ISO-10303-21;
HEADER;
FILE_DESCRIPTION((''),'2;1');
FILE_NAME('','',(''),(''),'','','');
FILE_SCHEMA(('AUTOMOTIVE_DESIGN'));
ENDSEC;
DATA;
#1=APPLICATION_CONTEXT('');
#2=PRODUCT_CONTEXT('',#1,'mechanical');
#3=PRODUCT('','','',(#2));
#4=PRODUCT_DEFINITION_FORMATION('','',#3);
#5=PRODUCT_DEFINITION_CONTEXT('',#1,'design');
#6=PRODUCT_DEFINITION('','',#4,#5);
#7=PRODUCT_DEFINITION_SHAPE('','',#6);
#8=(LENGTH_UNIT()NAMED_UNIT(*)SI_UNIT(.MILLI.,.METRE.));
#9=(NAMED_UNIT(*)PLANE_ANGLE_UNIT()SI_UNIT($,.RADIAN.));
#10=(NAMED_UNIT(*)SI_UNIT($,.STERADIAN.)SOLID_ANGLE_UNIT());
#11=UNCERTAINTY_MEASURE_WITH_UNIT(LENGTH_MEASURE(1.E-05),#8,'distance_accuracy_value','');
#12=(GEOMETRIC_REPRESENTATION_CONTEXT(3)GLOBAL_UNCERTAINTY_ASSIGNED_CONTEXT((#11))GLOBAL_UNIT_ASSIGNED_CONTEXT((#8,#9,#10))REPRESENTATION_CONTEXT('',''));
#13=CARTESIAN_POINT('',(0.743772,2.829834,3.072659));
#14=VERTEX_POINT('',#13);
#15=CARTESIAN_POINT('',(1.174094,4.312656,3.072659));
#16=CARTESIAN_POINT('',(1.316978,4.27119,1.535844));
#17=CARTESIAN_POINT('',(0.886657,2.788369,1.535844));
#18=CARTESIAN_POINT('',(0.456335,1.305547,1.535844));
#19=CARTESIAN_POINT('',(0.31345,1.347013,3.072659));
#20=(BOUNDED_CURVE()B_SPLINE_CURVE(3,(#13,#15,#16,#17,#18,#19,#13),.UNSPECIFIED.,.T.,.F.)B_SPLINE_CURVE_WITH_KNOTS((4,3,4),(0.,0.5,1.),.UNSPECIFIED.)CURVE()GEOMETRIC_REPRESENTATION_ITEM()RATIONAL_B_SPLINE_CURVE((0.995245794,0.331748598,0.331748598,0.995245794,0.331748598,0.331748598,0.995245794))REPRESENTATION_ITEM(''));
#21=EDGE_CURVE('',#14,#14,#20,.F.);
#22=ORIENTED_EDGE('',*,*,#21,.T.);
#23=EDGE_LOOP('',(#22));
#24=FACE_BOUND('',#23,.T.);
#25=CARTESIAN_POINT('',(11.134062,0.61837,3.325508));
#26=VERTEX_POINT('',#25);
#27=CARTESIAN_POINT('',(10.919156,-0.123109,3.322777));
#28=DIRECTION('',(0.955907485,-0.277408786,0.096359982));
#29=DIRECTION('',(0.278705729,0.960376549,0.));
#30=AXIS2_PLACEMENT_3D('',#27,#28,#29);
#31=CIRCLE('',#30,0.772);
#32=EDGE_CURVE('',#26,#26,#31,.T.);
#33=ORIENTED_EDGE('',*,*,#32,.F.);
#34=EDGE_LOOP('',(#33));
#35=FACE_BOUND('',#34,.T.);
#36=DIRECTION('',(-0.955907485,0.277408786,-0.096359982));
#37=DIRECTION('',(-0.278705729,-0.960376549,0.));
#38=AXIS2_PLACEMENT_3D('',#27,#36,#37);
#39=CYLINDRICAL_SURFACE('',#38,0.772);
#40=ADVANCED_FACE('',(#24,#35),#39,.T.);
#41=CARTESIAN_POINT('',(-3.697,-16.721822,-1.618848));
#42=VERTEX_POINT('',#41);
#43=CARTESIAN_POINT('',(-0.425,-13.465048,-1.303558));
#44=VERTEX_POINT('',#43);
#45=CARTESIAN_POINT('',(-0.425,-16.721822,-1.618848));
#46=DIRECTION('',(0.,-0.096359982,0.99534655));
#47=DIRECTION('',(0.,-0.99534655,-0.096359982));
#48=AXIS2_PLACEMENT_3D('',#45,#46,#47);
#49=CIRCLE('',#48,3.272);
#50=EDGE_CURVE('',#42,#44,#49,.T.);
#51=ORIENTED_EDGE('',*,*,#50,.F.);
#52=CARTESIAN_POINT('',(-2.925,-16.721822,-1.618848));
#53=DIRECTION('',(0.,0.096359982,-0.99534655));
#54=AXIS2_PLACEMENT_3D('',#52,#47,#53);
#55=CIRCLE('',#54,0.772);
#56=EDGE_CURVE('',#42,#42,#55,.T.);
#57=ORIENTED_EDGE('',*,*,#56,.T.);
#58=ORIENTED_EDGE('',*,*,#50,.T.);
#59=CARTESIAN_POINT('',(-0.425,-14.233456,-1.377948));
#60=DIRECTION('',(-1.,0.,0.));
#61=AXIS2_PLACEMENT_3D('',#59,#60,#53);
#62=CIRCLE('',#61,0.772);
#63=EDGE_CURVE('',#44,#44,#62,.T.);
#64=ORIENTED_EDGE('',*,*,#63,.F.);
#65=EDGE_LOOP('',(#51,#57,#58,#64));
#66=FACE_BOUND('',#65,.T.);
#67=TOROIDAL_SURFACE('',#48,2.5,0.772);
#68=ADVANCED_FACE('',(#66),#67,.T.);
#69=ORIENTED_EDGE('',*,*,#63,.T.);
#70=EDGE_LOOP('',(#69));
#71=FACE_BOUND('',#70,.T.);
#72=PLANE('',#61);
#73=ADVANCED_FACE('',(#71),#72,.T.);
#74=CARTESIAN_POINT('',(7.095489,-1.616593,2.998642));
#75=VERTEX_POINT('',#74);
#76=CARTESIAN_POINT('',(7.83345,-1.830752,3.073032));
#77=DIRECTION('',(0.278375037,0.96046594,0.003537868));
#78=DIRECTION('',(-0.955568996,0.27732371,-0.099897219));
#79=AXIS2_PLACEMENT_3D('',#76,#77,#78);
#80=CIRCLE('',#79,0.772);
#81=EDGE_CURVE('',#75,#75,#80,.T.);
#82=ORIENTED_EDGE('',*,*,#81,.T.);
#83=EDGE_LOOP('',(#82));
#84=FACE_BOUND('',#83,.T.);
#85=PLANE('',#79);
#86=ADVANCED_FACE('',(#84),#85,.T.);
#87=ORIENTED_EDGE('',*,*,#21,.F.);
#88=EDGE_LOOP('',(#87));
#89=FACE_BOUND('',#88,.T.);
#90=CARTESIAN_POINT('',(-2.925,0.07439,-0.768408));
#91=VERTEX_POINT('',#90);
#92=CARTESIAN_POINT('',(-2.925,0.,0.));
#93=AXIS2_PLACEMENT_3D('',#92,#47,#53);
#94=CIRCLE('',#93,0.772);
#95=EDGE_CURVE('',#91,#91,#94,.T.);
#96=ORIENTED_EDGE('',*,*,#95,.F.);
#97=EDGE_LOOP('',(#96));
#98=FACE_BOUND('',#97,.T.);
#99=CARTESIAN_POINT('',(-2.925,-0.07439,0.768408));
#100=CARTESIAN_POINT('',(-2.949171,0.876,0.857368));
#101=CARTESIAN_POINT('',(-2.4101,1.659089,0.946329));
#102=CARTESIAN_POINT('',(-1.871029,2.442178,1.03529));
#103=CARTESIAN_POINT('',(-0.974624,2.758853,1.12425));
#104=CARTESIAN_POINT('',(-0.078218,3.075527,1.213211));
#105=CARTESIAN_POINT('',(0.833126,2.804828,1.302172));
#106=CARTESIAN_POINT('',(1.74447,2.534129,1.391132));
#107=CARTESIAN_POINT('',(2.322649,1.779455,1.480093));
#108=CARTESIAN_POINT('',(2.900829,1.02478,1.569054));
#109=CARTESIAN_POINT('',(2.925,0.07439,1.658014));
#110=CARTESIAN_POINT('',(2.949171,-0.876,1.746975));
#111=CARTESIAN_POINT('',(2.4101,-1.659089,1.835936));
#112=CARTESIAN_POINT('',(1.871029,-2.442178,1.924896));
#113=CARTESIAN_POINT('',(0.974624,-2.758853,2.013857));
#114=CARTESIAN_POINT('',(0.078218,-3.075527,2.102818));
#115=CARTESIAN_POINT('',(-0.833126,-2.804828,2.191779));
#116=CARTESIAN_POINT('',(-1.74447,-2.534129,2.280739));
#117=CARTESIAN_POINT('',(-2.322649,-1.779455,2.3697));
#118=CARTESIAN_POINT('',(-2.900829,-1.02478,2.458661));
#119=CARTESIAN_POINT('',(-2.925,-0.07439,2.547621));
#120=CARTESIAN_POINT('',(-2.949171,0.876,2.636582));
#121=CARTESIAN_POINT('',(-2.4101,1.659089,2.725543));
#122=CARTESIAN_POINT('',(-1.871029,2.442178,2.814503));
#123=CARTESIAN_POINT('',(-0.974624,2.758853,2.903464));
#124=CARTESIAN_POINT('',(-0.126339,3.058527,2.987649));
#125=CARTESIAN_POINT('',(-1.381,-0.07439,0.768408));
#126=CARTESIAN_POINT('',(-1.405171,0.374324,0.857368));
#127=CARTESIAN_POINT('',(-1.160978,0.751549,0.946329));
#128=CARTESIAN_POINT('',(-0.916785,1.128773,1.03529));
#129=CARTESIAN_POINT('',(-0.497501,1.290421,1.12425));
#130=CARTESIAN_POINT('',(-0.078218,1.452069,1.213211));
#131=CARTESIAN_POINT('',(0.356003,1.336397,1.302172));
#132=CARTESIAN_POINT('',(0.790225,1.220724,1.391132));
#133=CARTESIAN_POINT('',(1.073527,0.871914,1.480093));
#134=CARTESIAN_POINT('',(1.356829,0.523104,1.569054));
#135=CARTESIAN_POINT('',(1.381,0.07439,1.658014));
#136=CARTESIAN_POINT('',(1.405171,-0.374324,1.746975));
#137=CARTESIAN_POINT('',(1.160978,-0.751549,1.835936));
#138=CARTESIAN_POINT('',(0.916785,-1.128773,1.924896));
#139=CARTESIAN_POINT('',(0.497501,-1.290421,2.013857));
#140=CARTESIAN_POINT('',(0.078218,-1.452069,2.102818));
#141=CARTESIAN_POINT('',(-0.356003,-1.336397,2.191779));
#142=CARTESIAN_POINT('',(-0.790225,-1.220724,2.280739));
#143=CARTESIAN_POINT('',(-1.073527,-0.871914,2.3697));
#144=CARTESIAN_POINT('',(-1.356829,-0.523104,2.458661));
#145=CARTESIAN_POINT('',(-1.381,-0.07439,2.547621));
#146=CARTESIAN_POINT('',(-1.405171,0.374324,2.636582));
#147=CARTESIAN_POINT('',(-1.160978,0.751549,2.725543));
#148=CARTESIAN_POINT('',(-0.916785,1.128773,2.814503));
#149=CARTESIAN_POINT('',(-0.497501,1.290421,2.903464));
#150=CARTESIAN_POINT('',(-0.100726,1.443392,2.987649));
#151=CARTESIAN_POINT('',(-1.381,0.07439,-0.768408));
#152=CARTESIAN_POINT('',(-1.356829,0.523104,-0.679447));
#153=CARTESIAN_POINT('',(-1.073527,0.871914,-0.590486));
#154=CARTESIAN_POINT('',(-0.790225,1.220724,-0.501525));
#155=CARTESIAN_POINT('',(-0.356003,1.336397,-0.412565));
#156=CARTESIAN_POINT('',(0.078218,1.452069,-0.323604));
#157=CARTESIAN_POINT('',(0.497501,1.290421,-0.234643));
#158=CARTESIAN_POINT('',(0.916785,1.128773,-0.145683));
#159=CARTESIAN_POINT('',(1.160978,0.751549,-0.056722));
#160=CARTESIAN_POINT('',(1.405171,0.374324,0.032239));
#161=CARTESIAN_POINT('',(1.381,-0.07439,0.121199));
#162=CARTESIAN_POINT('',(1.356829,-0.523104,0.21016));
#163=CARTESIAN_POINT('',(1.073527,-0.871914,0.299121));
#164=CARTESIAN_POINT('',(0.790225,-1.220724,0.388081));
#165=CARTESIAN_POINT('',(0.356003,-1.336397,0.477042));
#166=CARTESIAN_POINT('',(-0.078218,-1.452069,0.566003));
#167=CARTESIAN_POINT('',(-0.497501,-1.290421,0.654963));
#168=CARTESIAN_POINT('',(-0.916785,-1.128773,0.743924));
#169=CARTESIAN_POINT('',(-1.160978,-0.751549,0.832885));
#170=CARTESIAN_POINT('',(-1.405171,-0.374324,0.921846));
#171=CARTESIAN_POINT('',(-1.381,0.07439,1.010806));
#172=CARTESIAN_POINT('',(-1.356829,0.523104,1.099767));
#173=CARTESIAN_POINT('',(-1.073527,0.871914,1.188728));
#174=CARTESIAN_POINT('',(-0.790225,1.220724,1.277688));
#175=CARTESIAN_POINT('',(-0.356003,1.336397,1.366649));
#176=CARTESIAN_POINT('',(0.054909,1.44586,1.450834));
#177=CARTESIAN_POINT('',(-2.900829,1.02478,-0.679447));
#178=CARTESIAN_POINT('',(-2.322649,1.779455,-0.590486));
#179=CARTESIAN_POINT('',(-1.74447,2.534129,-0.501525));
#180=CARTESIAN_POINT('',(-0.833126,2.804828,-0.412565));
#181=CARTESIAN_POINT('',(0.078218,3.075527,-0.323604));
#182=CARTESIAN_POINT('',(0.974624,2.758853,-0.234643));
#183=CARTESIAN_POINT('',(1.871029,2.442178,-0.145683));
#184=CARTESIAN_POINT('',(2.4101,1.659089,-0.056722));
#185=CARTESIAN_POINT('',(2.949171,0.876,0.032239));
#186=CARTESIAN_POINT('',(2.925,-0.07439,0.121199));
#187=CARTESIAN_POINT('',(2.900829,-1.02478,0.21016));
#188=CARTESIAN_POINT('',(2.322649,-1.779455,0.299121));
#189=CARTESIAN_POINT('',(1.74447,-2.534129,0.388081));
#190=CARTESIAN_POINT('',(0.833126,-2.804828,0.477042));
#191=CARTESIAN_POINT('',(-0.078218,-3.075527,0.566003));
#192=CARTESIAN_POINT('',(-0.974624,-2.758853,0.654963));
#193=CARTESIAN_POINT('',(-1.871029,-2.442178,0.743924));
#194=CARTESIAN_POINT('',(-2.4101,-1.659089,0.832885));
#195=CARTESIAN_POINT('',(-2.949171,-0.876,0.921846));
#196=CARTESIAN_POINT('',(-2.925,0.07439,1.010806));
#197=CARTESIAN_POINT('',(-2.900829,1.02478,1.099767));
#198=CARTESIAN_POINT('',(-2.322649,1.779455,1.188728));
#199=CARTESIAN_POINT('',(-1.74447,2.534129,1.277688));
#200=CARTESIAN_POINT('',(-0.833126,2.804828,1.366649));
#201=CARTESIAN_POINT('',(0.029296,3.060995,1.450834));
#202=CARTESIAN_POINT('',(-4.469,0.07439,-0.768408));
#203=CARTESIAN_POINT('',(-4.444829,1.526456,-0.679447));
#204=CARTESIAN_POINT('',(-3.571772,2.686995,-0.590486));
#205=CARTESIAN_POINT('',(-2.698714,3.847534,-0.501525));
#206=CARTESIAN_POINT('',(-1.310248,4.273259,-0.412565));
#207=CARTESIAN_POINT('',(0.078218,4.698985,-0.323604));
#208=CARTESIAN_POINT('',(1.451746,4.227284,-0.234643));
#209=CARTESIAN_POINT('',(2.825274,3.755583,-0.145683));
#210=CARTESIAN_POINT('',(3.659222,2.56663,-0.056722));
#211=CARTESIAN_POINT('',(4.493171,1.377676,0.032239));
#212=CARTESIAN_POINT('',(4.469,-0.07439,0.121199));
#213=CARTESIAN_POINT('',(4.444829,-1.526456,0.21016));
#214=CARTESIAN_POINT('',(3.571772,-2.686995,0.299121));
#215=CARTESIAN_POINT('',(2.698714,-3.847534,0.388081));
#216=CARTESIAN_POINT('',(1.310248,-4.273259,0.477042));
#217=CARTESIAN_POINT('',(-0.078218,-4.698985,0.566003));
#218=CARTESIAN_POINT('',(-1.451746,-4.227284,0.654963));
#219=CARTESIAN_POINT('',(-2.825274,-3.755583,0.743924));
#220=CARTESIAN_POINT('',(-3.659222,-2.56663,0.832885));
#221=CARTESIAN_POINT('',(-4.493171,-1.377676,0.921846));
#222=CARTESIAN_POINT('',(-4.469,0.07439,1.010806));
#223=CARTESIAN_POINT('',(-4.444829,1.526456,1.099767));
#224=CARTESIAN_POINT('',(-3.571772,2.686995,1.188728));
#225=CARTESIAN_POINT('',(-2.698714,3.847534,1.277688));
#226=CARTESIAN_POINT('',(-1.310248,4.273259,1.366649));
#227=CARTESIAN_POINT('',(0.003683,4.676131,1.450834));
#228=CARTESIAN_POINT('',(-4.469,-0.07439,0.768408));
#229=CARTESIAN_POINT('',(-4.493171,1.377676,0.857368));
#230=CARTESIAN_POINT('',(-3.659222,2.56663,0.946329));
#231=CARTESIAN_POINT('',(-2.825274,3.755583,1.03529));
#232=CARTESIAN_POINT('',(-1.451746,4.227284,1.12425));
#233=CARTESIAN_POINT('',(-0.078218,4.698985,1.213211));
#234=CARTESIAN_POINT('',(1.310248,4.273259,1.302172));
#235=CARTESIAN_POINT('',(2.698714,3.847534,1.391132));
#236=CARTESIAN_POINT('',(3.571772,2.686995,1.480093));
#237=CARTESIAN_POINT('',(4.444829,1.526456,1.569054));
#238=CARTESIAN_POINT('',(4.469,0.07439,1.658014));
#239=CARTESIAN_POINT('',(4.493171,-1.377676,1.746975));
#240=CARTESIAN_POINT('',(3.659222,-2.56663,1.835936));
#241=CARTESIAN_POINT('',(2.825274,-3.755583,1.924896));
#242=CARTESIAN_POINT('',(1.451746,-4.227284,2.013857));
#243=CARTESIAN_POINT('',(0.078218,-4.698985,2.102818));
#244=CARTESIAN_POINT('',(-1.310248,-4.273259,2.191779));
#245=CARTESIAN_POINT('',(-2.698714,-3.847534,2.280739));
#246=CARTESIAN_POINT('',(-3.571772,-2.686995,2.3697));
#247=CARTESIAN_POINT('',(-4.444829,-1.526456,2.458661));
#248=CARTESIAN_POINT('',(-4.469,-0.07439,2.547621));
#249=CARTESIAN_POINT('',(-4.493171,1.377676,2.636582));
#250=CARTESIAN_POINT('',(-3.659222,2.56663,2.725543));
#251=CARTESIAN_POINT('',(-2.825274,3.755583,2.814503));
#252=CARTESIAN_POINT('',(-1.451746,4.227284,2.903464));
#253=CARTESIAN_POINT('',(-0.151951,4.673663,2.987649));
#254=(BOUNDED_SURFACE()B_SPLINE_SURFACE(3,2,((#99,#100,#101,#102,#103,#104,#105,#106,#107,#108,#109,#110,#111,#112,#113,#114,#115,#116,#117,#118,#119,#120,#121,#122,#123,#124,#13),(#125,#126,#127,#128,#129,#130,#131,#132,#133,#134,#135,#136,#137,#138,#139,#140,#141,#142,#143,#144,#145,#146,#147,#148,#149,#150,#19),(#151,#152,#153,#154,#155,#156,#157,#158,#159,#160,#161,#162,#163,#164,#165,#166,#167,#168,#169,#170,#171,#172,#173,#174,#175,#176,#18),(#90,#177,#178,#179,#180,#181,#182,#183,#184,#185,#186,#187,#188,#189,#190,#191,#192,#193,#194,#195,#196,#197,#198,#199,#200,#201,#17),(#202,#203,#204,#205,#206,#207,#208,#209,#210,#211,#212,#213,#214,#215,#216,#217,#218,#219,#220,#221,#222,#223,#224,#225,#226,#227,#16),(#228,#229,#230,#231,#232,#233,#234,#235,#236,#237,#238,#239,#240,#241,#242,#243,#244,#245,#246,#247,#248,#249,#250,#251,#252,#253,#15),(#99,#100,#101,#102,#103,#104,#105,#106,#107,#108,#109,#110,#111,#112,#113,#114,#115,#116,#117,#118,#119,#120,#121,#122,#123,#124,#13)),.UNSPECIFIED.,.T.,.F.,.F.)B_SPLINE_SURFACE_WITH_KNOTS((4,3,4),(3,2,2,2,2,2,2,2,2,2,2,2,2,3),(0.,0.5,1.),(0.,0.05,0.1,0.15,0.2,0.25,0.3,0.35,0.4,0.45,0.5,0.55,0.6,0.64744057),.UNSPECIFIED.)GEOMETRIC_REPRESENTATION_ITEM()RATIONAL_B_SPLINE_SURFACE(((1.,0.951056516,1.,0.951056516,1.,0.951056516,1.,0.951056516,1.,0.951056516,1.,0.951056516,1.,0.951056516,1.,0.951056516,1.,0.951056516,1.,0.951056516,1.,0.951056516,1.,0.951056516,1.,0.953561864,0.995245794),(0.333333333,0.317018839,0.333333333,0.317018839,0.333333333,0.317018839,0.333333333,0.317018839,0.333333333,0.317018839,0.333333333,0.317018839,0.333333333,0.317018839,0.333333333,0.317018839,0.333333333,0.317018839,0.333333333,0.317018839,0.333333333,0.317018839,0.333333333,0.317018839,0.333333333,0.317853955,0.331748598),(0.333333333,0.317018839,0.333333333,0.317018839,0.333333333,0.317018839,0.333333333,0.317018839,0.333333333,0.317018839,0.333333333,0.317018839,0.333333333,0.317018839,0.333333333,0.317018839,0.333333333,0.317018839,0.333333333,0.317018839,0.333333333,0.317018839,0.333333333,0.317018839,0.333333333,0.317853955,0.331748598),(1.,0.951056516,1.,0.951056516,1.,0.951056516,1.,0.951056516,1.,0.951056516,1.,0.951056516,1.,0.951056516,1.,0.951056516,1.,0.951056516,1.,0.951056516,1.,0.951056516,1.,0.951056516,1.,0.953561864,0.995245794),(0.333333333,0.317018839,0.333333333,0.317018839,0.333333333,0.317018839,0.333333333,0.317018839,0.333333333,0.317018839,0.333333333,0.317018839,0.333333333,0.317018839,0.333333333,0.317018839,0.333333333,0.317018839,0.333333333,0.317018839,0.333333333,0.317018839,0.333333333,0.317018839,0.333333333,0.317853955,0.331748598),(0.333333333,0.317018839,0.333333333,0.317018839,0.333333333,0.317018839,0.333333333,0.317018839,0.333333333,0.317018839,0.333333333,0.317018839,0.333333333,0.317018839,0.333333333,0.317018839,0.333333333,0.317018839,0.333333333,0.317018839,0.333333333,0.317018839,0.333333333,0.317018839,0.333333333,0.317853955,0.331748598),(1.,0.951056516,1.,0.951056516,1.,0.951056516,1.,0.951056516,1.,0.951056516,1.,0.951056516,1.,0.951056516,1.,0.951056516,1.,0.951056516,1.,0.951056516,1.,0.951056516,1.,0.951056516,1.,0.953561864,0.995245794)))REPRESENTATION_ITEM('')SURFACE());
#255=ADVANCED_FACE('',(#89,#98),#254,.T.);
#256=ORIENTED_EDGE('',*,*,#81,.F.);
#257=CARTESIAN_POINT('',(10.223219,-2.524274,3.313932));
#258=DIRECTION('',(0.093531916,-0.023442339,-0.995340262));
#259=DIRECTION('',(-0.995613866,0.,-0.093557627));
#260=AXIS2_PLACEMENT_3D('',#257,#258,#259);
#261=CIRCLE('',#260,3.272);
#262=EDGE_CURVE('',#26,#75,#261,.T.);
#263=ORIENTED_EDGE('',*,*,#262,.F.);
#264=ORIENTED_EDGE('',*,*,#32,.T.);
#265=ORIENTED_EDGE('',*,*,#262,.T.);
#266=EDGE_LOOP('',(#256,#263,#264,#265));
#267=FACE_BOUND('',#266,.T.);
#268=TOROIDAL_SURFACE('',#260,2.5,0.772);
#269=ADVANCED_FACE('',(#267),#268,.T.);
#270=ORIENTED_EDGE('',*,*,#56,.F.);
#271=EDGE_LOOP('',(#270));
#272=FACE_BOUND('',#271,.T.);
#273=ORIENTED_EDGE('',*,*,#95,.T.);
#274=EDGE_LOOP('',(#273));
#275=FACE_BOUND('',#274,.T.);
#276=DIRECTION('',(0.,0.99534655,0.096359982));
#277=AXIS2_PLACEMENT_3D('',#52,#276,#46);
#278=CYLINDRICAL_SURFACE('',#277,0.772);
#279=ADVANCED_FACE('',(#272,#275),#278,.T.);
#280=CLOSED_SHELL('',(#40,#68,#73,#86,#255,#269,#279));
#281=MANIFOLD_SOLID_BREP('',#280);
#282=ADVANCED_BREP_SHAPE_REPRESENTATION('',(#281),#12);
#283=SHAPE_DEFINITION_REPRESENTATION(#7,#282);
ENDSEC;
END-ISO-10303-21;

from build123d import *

# Parameters (mm, degrees)
SWEEP1_PITCH        = 1.779213779
SWEEP1_HEIGHT       = 2.304
SWEEP1_RADIUS       = 2.925
SWEEP1_START_ANGLE  = -180
SWEEP1_PROFILE_R    = 0.772
SKETCH7_R           = 0.772
BOSS_EXTRUDE1_DEPTH = 16.8
SKETCH8_R           = 0.772
BOSS_EXTRUDE2_DEPTH = 10.57
SKETCH11_R          = 0.772
SKETCH13_R          = 0.772


with BuildPart() as part:
    # Sweep1: sweep along a helix
    with BuildLine() as sweep1_path:
        add(Helix(SWEEP1_PITCH, SWEEP1_HEIGHT, SWEEP1_RADIUS, center=(0, 0, 0), direction=(0, 0, 1), lefthand=True, mode=Mode.PRIVATE).rotate(Axis((0, 0, 0), (0, 0, 1)), SWEEP1_START_ANGLE))
    # Sweep1 profile (on start of the path) → Sweep1 (sweep)
    with BuildSketch(Plane(origin=(-2.925, 0, 0), x_dir=(0, -0.09635998191573415, 0.9953465496424848), z_dir=(3.597284925943457e-13, 0.9953465496424848, 0.09635998191573415))):
        Circle(SWEEP1_PROFILE_R)
    sweep(path=sweep1_path.line, is_frenet=True)

    # Sketch7 → Boss-Extrude1 (add)
    with BuildSketch(Plane(origin=(0, 0, 0), x_dir=(1, 0, 0), z_dir=(7.675357685849381e-15, -0.9953465496424846, -0.09635998191573725))):
        with Locations(Location((-2.925, 0, 0), (0, 0, 90))):
            Circle(SKETCH7_R)
    extrude(amount=BOSS_EXTRUDE1_DEPTH)


with BuildPart() as boss_extrude2_tool:
    # Sketch8 → Boss-Extrude2 (new body)
    with BuildSketch(Plane(origin=(0.212247465, -0.061595199, 0.021395545), x_dir=(0.09353191621905146, -0.023442339284879547, -0.9953402621100208), z_dir=(0.9559074848197946, -0.27740878564078186, 0.09635998191573734))):
        with Locations(Location((-2.283117967, 2.933133661, 0), (0, 0, 179.796346996))):
            Circle(SKETCH8_R)
    extrude(amount=BOSS_EXTRUDE2_DEPTH)


with BuildPart() as part_1:
    add(part.part)


with BuildPart() as part_2:
    # Boss-Extrude2: joined with boss_extrude2_tool
    add(part_1.part.fuse(boss_extrude2_tool.part, tol=0.00001))

    # Sweep2: sweep along a path in Sketch10
    with BuildLine(Plane(origin=(0, 0, 0), x_dir=(1, 0, 0), z_dir=(-1.1470381111266431e-14, -0.09635998191573725, 0.9953465496424845))) as sweep2_path:
        ThreePointArc((-2.925, -16.8), (1.342766953, -18.567766953), (-0.425, -14.3))
    # Sketch11 → Sweep2 (sweep)
    with BuildSketch(Plane(origin=(0, -16.721822034, -1.618847696), x_dir=(1, 0, 0), z_dir=(7.675357685849381e-15, -0.9953465496424845, -0.09635998191573723))):
        with Locations((-2.925, 0)):
            Circle(SKETCH11_R)
    sweep(path=sweep2_path.line)

    # Sweep3: sweep along a path in Sketch12
    with BuildLine(Plane(origin=(-0.213544398, 0.053521626, 2.272479236), x_dir=(-0.9956162536810559, -0.0019645261204809467, -0.09351158240143997), z_dir=(0.09353191621905146, -0.023442339284879526, -0.9953402621100208))) as sweep3_path:
        ThreePointArc((-11.181765828, -0.198652929), (-11.686848987, -4.790354767), (-8.082877753, -1.900678987))
    # Sketch13 → Sweep3 (sweep)
    with BuildSketch(Plane(origin=(10.316189579, -2.993806063, 1.039920554), x_dir=(0.09353191621905066, -0.023442339284882305, -0.9953402621100208), z_dir=(0.9559074848197945, -0.27740878564078186, 0.09635998191573733))):
        with Locations((-2.283117967, 2.933133661)):
            Circle(SKETCH13_R)
    sweep(path=sweep3_path.line)


solid = part_2.part
